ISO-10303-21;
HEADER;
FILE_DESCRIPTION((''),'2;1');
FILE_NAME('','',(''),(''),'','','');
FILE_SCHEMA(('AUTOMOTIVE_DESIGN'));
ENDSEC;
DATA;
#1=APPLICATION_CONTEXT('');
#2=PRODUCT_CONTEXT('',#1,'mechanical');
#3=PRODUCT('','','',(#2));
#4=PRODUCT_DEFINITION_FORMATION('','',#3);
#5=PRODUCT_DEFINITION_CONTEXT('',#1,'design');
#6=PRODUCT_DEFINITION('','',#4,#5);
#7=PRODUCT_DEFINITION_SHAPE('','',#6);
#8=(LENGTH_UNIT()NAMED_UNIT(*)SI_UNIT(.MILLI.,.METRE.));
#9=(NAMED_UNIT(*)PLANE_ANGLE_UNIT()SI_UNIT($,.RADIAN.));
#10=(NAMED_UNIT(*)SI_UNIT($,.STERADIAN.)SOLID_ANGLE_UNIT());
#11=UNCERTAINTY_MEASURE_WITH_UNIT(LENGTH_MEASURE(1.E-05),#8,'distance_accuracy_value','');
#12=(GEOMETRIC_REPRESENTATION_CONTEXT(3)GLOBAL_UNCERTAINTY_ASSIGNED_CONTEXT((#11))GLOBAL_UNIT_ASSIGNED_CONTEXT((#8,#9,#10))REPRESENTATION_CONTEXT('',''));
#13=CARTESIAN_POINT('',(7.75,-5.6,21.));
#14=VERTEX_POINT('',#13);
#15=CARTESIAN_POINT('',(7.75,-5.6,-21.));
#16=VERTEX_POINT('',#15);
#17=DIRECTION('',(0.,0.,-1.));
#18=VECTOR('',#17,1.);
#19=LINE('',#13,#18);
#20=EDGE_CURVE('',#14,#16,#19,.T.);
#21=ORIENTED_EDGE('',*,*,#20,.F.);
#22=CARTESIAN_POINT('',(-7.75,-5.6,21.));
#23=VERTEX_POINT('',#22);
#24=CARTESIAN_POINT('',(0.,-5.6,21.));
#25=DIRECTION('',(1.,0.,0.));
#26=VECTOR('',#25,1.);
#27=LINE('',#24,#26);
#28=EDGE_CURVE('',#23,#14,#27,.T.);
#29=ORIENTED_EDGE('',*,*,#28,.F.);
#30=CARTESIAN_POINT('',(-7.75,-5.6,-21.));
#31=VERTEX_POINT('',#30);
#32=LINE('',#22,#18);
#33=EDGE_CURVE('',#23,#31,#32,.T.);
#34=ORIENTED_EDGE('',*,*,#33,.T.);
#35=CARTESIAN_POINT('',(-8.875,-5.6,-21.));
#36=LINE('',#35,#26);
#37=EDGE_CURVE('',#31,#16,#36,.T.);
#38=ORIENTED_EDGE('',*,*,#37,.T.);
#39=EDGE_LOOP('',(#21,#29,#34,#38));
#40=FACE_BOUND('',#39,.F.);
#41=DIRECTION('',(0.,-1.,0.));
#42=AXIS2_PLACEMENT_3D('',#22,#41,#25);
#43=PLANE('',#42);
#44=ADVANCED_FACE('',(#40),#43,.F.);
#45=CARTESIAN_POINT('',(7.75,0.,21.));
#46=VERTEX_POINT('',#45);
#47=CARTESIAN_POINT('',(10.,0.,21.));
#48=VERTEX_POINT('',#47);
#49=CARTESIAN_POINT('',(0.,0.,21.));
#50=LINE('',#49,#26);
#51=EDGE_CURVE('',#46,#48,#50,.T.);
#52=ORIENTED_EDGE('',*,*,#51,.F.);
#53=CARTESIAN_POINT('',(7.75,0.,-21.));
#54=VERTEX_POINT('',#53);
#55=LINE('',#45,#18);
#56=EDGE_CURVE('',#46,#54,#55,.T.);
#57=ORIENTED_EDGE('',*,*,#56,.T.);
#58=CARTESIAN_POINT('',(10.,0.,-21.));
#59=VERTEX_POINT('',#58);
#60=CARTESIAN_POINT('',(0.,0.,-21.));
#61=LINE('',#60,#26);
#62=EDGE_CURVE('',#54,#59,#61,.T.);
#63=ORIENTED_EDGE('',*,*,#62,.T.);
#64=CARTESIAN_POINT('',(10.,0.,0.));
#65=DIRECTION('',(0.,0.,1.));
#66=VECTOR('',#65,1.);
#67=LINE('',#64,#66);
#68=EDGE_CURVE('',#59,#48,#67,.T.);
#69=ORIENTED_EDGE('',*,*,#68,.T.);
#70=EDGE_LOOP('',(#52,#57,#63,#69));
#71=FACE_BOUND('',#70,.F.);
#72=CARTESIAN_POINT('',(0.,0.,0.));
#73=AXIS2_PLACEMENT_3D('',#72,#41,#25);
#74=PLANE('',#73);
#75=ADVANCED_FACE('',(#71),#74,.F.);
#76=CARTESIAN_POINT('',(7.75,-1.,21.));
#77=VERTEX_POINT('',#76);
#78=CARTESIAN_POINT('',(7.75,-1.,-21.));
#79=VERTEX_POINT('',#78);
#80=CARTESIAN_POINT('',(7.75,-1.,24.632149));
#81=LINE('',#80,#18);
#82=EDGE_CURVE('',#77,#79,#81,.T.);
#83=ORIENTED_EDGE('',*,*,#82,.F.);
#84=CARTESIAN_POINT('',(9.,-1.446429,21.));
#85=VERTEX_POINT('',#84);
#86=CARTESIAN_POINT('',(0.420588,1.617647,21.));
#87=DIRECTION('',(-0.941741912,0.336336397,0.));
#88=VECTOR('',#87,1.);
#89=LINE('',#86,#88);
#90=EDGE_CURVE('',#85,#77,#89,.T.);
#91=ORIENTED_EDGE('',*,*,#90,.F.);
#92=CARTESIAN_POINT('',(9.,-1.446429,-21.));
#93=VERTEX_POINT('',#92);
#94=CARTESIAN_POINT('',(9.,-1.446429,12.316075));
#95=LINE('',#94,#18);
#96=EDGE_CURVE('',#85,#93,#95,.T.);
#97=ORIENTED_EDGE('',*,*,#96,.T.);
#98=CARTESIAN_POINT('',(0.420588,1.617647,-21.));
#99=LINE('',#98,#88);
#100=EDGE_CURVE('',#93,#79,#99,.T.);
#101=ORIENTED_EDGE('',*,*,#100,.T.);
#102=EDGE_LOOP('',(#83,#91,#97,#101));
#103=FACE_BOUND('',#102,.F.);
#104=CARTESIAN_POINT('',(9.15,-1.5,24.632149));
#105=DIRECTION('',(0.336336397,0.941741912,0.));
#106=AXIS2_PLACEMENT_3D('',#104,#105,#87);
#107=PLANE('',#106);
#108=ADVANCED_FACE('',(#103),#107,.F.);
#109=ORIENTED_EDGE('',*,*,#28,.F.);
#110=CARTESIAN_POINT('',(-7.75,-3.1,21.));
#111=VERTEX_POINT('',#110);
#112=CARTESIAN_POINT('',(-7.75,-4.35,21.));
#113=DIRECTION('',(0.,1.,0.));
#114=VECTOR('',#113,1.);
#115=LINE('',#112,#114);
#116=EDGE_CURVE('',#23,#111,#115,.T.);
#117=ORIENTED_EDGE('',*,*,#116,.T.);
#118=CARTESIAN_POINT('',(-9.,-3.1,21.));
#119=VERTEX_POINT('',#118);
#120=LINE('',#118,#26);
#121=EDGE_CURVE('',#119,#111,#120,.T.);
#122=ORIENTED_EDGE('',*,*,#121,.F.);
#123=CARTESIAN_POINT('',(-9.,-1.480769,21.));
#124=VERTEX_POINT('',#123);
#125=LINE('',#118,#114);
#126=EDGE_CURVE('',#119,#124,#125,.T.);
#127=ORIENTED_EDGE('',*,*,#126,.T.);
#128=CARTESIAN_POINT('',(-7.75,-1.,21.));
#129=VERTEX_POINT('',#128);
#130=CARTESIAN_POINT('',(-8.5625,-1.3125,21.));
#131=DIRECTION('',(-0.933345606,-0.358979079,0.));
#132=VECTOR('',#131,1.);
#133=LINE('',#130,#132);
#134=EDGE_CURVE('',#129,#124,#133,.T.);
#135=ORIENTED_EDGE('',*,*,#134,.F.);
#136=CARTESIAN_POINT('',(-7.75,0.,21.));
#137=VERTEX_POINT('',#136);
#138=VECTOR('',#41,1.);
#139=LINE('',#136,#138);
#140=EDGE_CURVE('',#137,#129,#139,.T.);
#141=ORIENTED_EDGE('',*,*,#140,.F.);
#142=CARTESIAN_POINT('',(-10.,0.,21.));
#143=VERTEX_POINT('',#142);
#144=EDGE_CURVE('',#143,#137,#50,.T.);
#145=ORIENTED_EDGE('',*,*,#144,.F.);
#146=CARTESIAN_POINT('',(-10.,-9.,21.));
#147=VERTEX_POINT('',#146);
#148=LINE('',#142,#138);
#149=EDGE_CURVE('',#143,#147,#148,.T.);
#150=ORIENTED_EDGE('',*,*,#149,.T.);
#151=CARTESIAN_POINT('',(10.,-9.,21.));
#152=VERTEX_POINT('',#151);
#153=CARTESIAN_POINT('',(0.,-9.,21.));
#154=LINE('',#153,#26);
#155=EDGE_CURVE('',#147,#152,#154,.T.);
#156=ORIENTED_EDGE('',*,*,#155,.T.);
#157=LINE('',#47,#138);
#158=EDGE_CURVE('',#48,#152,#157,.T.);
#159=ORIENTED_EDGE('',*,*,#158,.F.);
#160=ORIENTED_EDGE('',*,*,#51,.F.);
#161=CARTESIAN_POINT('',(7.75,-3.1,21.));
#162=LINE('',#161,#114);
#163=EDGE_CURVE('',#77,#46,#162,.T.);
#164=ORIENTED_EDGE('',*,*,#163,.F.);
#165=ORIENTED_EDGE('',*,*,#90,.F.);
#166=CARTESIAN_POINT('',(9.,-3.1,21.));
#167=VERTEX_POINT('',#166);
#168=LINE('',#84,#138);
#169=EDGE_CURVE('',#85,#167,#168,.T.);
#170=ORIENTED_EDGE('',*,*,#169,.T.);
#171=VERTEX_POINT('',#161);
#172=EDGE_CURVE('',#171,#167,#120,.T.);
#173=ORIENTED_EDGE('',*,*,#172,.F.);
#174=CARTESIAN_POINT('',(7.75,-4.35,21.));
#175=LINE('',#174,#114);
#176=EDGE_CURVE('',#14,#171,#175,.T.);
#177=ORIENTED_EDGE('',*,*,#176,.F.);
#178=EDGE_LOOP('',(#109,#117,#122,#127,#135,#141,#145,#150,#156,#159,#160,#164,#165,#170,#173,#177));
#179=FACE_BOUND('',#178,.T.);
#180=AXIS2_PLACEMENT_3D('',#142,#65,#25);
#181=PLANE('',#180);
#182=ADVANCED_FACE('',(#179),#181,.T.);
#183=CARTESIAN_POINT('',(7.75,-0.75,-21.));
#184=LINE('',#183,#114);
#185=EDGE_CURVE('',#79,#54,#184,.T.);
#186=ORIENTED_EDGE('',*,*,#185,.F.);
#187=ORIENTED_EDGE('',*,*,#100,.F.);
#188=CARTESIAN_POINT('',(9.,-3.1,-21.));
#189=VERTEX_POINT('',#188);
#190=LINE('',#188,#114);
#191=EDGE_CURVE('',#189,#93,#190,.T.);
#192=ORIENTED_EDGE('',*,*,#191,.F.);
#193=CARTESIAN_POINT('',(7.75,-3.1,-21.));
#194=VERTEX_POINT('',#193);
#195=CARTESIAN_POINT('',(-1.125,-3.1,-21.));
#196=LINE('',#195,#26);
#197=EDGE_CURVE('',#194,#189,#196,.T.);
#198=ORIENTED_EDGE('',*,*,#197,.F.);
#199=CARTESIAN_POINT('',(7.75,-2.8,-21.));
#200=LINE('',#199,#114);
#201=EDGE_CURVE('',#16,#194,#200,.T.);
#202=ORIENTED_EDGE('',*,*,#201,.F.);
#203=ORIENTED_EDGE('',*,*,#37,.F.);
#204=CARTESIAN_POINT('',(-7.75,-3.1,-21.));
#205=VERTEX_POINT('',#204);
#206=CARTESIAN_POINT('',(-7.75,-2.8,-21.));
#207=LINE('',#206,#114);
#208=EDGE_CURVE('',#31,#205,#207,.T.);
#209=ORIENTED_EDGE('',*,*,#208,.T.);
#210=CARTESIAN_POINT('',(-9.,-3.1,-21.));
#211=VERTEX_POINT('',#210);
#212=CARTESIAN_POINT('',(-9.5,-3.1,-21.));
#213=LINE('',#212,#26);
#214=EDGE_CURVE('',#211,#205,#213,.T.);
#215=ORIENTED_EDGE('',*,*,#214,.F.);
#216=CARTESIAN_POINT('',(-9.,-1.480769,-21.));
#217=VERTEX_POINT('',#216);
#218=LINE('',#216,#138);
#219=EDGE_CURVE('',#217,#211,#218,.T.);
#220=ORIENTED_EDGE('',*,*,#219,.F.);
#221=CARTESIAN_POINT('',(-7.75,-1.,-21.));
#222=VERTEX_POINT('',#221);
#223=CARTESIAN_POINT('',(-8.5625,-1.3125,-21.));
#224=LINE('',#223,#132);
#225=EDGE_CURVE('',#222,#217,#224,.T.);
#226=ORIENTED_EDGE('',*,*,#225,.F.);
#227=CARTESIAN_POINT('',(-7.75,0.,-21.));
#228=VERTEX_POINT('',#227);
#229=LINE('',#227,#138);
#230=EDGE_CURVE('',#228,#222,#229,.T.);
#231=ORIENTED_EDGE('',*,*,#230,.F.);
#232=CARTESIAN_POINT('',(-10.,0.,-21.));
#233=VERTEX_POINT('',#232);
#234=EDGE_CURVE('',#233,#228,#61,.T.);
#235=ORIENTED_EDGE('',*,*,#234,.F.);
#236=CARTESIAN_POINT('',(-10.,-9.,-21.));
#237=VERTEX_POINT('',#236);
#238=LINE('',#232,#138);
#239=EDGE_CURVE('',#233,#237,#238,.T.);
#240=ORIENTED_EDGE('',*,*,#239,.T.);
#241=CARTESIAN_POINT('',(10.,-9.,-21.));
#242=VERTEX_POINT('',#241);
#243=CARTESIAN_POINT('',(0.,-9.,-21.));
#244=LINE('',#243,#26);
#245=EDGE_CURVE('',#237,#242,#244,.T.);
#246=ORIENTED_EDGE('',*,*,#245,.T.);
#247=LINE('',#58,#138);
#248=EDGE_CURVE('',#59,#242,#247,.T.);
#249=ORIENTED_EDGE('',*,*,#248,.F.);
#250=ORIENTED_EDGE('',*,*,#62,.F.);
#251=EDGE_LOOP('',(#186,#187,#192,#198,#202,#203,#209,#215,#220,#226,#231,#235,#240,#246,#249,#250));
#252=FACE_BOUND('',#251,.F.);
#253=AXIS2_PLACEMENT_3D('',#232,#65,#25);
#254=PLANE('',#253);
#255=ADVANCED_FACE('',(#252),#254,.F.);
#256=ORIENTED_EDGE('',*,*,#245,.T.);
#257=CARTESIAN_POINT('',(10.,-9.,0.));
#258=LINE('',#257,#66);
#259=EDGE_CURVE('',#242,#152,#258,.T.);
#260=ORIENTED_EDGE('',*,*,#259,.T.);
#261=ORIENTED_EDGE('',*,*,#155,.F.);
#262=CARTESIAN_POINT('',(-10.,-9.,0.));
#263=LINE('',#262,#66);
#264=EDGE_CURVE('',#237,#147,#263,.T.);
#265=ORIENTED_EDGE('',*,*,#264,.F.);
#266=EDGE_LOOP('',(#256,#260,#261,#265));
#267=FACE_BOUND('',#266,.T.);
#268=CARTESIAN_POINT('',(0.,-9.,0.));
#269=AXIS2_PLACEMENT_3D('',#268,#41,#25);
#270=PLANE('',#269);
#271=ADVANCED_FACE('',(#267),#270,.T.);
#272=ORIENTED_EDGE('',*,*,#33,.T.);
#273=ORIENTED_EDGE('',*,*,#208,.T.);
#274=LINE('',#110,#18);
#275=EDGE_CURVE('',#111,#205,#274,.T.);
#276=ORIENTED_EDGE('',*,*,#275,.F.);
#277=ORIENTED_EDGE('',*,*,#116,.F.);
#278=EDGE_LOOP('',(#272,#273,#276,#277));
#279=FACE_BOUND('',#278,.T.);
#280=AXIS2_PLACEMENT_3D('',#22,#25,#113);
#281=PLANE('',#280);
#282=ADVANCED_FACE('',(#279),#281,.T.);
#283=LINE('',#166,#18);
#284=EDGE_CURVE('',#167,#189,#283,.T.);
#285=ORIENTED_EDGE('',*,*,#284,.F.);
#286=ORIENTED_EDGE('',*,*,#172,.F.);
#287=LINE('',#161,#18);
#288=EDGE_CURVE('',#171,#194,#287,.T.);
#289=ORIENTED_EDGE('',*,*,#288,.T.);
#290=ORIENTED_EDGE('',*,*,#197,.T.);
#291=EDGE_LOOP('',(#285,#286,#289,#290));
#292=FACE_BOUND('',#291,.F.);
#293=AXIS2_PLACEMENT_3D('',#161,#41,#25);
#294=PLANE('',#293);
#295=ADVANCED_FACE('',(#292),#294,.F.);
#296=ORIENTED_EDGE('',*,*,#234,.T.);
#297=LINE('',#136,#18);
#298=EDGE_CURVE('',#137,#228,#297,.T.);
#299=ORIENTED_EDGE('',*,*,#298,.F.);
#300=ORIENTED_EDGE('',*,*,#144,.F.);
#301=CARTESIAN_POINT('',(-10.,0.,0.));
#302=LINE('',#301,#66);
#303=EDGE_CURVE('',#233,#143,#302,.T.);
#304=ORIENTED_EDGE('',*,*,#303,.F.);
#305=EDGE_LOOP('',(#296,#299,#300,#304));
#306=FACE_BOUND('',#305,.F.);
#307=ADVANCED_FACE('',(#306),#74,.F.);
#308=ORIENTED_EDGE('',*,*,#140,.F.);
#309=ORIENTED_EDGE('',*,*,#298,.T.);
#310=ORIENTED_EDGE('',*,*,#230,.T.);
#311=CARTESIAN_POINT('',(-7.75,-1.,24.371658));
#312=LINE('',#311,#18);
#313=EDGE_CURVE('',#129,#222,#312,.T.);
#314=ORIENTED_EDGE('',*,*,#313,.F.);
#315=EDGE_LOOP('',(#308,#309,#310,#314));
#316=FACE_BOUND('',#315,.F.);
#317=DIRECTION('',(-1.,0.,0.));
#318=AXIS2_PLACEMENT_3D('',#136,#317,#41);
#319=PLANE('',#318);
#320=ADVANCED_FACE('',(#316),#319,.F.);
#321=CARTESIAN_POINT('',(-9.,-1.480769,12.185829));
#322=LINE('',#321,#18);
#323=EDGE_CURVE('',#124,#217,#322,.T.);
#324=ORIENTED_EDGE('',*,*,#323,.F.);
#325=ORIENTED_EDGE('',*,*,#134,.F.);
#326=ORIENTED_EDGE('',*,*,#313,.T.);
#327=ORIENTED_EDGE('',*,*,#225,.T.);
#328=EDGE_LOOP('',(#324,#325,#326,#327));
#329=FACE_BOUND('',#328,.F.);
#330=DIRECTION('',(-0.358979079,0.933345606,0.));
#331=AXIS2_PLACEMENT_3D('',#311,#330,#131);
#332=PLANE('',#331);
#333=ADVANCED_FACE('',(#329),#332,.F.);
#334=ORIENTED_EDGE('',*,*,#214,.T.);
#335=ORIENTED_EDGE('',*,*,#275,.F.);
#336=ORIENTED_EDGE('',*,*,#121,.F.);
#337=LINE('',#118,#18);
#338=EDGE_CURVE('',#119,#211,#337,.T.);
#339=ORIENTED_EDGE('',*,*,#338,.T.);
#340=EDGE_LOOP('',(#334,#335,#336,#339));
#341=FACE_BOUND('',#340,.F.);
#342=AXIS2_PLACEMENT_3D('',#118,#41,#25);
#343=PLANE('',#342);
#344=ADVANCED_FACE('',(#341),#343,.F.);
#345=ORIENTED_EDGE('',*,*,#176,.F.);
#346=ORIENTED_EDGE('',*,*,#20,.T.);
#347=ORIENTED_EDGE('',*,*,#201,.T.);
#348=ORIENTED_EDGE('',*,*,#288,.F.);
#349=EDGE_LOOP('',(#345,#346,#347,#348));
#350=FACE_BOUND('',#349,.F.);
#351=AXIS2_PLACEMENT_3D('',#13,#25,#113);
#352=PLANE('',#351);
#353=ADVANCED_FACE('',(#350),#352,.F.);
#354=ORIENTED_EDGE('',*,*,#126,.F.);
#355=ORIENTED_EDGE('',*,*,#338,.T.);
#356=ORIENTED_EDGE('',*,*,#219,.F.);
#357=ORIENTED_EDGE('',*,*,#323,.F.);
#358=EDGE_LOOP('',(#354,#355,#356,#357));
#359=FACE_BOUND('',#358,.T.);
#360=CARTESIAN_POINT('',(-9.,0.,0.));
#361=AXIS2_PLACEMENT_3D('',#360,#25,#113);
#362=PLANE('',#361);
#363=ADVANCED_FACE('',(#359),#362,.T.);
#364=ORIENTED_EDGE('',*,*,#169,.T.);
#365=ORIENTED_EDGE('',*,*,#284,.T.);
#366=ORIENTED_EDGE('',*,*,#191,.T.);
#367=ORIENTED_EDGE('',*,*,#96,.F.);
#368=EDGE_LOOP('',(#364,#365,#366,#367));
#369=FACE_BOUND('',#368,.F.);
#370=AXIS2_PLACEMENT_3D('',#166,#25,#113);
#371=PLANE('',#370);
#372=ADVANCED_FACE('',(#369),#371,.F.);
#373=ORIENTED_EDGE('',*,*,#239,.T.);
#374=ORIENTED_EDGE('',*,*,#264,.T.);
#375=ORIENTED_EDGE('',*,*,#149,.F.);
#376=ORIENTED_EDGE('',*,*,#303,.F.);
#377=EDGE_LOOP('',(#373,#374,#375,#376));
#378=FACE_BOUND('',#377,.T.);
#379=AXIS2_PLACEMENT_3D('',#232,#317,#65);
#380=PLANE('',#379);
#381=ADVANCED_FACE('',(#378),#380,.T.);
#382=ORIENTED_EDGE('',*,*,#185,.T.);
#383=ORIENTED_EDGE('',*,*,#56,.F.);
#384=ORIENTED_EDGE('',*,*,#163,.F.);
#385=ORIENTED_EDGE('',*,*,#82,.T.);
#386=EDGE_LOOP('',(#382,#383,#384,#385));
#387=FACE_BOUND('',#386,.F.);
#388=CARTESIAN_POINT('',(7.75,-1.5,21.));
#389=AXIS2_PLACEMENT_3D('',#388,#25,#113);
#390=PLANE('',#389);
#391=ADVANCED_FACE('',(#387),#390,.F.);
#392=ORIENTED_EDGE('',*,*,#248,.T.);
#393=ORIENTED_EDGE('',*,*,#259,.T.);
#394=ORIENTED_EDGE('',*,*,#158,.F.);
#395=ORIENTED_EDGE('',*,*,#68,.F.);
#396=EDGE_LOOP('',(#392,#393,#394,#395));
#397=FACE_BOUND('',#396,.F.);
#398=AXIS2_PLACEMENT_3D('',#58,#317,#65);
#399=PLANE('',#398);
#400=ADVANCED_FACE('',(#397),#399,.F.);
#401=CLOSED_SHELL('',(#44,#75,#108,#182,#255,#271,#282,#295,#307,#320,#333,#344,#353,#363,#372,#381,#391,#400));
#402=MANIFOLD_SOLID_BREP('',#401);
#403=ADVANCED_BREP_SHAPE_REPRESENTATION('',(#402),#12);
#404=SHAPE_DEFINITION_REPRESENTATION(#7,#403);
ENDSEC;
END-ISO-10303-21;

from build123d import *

# Parameters (mm, degrees)
F0_W        = 20
F0_H        = 42
F1_DEPTH    = 9
F2_W        = 15.5
F2_H        = 1.5
F2_H_2      = 1.6
F2_W_2      = 1.25
F2_H_3      = 2.5
F3_DEPTH    = 42.001
F4_T4_DEPTH = 48.7433158126
F5_T4_DEPTH = 49.2642981969


# Not quite as in the source:
# - a fillet or chamfer that OpenCascade refuses, or shapes differently, is made with other operations: its cross-section is extruded or revolved along the edge and cut away or added


with BuildPart() as f1:
    # F0 (on Front) → F1 (new body)
    with BuildSketch(Plane.XZ):
        Rectangle(F0_W, F0_H)
    extrude(amount=F1_DEPTH)

    # F2 (on face) → F3 (cut, through all)
    with BuildSketch(Plane.XY.offset(21)):
        with Locations((0, -0.75)):
            Rectangle(F2_W, F2_H)
        with Locations((0, -2.3)):
            Rectangle(F2_W, F2_H_2)
        with Locations((-8.375, -2.3)):
            Rectangle(F2_W_2, F2_H_2)
        with Locations((8.375, -2.3)):
            Rectangle(F2_W_2, F2_H_2)
        with Locations((0, -4.35)):
            Rectangle(F2_W, F2_H_3)
    extrude(amount=-F3_DEPTH, mode=Mode.SUBTRACT)

    # F4: chamfer of 1.3 x 0.5 on 1 edges, made by hand


with BuildPart() as f4_tool2:
    # F4_s3 → F4_t4 (new body)
    with BuildSketch(Plane.XY.offset(24.3716579063)):
        Polygon((-7.75, -1), (-9.05, -1.5), (-7.75, -1.5), align=None)
    extrude(amount=-F4_T4_DEPTH)

    split(bisect_by=Plane.YZ.offset(-9), keep=Keep.TOP)


with BuildPart() as f1_1:
    add(f1.part)

    # F4_t1: cut F4_tool2
    add(f4_tool2.part, mode=Mode.SUBTRACT)

    # F5: chamfer of 1.4 x 0.5 on 1 edges, made by hand


with BuildPart() as f5_tool2:
    # F5_s3 → F5_t4 (new body)
    with BuildSketch(Plane.XY.offset(24.6321490984)):
        Polygon((9.15, -1.5), (7.75, -1), (7.75, -1.5), align=None)
    extrude(amount=-F5_T4_DEPTH)

    split(bisect_by=Plane.YZ.offset(9), keep=Keep.BOTTOM)


with BuildPart() as f1_2:
    add(f1_1.part)

    # F5_t1: cut F5_tool2
    add(f5_tool2.part, mode=Mode.SUBTRACT)


solid = f1_2.part
